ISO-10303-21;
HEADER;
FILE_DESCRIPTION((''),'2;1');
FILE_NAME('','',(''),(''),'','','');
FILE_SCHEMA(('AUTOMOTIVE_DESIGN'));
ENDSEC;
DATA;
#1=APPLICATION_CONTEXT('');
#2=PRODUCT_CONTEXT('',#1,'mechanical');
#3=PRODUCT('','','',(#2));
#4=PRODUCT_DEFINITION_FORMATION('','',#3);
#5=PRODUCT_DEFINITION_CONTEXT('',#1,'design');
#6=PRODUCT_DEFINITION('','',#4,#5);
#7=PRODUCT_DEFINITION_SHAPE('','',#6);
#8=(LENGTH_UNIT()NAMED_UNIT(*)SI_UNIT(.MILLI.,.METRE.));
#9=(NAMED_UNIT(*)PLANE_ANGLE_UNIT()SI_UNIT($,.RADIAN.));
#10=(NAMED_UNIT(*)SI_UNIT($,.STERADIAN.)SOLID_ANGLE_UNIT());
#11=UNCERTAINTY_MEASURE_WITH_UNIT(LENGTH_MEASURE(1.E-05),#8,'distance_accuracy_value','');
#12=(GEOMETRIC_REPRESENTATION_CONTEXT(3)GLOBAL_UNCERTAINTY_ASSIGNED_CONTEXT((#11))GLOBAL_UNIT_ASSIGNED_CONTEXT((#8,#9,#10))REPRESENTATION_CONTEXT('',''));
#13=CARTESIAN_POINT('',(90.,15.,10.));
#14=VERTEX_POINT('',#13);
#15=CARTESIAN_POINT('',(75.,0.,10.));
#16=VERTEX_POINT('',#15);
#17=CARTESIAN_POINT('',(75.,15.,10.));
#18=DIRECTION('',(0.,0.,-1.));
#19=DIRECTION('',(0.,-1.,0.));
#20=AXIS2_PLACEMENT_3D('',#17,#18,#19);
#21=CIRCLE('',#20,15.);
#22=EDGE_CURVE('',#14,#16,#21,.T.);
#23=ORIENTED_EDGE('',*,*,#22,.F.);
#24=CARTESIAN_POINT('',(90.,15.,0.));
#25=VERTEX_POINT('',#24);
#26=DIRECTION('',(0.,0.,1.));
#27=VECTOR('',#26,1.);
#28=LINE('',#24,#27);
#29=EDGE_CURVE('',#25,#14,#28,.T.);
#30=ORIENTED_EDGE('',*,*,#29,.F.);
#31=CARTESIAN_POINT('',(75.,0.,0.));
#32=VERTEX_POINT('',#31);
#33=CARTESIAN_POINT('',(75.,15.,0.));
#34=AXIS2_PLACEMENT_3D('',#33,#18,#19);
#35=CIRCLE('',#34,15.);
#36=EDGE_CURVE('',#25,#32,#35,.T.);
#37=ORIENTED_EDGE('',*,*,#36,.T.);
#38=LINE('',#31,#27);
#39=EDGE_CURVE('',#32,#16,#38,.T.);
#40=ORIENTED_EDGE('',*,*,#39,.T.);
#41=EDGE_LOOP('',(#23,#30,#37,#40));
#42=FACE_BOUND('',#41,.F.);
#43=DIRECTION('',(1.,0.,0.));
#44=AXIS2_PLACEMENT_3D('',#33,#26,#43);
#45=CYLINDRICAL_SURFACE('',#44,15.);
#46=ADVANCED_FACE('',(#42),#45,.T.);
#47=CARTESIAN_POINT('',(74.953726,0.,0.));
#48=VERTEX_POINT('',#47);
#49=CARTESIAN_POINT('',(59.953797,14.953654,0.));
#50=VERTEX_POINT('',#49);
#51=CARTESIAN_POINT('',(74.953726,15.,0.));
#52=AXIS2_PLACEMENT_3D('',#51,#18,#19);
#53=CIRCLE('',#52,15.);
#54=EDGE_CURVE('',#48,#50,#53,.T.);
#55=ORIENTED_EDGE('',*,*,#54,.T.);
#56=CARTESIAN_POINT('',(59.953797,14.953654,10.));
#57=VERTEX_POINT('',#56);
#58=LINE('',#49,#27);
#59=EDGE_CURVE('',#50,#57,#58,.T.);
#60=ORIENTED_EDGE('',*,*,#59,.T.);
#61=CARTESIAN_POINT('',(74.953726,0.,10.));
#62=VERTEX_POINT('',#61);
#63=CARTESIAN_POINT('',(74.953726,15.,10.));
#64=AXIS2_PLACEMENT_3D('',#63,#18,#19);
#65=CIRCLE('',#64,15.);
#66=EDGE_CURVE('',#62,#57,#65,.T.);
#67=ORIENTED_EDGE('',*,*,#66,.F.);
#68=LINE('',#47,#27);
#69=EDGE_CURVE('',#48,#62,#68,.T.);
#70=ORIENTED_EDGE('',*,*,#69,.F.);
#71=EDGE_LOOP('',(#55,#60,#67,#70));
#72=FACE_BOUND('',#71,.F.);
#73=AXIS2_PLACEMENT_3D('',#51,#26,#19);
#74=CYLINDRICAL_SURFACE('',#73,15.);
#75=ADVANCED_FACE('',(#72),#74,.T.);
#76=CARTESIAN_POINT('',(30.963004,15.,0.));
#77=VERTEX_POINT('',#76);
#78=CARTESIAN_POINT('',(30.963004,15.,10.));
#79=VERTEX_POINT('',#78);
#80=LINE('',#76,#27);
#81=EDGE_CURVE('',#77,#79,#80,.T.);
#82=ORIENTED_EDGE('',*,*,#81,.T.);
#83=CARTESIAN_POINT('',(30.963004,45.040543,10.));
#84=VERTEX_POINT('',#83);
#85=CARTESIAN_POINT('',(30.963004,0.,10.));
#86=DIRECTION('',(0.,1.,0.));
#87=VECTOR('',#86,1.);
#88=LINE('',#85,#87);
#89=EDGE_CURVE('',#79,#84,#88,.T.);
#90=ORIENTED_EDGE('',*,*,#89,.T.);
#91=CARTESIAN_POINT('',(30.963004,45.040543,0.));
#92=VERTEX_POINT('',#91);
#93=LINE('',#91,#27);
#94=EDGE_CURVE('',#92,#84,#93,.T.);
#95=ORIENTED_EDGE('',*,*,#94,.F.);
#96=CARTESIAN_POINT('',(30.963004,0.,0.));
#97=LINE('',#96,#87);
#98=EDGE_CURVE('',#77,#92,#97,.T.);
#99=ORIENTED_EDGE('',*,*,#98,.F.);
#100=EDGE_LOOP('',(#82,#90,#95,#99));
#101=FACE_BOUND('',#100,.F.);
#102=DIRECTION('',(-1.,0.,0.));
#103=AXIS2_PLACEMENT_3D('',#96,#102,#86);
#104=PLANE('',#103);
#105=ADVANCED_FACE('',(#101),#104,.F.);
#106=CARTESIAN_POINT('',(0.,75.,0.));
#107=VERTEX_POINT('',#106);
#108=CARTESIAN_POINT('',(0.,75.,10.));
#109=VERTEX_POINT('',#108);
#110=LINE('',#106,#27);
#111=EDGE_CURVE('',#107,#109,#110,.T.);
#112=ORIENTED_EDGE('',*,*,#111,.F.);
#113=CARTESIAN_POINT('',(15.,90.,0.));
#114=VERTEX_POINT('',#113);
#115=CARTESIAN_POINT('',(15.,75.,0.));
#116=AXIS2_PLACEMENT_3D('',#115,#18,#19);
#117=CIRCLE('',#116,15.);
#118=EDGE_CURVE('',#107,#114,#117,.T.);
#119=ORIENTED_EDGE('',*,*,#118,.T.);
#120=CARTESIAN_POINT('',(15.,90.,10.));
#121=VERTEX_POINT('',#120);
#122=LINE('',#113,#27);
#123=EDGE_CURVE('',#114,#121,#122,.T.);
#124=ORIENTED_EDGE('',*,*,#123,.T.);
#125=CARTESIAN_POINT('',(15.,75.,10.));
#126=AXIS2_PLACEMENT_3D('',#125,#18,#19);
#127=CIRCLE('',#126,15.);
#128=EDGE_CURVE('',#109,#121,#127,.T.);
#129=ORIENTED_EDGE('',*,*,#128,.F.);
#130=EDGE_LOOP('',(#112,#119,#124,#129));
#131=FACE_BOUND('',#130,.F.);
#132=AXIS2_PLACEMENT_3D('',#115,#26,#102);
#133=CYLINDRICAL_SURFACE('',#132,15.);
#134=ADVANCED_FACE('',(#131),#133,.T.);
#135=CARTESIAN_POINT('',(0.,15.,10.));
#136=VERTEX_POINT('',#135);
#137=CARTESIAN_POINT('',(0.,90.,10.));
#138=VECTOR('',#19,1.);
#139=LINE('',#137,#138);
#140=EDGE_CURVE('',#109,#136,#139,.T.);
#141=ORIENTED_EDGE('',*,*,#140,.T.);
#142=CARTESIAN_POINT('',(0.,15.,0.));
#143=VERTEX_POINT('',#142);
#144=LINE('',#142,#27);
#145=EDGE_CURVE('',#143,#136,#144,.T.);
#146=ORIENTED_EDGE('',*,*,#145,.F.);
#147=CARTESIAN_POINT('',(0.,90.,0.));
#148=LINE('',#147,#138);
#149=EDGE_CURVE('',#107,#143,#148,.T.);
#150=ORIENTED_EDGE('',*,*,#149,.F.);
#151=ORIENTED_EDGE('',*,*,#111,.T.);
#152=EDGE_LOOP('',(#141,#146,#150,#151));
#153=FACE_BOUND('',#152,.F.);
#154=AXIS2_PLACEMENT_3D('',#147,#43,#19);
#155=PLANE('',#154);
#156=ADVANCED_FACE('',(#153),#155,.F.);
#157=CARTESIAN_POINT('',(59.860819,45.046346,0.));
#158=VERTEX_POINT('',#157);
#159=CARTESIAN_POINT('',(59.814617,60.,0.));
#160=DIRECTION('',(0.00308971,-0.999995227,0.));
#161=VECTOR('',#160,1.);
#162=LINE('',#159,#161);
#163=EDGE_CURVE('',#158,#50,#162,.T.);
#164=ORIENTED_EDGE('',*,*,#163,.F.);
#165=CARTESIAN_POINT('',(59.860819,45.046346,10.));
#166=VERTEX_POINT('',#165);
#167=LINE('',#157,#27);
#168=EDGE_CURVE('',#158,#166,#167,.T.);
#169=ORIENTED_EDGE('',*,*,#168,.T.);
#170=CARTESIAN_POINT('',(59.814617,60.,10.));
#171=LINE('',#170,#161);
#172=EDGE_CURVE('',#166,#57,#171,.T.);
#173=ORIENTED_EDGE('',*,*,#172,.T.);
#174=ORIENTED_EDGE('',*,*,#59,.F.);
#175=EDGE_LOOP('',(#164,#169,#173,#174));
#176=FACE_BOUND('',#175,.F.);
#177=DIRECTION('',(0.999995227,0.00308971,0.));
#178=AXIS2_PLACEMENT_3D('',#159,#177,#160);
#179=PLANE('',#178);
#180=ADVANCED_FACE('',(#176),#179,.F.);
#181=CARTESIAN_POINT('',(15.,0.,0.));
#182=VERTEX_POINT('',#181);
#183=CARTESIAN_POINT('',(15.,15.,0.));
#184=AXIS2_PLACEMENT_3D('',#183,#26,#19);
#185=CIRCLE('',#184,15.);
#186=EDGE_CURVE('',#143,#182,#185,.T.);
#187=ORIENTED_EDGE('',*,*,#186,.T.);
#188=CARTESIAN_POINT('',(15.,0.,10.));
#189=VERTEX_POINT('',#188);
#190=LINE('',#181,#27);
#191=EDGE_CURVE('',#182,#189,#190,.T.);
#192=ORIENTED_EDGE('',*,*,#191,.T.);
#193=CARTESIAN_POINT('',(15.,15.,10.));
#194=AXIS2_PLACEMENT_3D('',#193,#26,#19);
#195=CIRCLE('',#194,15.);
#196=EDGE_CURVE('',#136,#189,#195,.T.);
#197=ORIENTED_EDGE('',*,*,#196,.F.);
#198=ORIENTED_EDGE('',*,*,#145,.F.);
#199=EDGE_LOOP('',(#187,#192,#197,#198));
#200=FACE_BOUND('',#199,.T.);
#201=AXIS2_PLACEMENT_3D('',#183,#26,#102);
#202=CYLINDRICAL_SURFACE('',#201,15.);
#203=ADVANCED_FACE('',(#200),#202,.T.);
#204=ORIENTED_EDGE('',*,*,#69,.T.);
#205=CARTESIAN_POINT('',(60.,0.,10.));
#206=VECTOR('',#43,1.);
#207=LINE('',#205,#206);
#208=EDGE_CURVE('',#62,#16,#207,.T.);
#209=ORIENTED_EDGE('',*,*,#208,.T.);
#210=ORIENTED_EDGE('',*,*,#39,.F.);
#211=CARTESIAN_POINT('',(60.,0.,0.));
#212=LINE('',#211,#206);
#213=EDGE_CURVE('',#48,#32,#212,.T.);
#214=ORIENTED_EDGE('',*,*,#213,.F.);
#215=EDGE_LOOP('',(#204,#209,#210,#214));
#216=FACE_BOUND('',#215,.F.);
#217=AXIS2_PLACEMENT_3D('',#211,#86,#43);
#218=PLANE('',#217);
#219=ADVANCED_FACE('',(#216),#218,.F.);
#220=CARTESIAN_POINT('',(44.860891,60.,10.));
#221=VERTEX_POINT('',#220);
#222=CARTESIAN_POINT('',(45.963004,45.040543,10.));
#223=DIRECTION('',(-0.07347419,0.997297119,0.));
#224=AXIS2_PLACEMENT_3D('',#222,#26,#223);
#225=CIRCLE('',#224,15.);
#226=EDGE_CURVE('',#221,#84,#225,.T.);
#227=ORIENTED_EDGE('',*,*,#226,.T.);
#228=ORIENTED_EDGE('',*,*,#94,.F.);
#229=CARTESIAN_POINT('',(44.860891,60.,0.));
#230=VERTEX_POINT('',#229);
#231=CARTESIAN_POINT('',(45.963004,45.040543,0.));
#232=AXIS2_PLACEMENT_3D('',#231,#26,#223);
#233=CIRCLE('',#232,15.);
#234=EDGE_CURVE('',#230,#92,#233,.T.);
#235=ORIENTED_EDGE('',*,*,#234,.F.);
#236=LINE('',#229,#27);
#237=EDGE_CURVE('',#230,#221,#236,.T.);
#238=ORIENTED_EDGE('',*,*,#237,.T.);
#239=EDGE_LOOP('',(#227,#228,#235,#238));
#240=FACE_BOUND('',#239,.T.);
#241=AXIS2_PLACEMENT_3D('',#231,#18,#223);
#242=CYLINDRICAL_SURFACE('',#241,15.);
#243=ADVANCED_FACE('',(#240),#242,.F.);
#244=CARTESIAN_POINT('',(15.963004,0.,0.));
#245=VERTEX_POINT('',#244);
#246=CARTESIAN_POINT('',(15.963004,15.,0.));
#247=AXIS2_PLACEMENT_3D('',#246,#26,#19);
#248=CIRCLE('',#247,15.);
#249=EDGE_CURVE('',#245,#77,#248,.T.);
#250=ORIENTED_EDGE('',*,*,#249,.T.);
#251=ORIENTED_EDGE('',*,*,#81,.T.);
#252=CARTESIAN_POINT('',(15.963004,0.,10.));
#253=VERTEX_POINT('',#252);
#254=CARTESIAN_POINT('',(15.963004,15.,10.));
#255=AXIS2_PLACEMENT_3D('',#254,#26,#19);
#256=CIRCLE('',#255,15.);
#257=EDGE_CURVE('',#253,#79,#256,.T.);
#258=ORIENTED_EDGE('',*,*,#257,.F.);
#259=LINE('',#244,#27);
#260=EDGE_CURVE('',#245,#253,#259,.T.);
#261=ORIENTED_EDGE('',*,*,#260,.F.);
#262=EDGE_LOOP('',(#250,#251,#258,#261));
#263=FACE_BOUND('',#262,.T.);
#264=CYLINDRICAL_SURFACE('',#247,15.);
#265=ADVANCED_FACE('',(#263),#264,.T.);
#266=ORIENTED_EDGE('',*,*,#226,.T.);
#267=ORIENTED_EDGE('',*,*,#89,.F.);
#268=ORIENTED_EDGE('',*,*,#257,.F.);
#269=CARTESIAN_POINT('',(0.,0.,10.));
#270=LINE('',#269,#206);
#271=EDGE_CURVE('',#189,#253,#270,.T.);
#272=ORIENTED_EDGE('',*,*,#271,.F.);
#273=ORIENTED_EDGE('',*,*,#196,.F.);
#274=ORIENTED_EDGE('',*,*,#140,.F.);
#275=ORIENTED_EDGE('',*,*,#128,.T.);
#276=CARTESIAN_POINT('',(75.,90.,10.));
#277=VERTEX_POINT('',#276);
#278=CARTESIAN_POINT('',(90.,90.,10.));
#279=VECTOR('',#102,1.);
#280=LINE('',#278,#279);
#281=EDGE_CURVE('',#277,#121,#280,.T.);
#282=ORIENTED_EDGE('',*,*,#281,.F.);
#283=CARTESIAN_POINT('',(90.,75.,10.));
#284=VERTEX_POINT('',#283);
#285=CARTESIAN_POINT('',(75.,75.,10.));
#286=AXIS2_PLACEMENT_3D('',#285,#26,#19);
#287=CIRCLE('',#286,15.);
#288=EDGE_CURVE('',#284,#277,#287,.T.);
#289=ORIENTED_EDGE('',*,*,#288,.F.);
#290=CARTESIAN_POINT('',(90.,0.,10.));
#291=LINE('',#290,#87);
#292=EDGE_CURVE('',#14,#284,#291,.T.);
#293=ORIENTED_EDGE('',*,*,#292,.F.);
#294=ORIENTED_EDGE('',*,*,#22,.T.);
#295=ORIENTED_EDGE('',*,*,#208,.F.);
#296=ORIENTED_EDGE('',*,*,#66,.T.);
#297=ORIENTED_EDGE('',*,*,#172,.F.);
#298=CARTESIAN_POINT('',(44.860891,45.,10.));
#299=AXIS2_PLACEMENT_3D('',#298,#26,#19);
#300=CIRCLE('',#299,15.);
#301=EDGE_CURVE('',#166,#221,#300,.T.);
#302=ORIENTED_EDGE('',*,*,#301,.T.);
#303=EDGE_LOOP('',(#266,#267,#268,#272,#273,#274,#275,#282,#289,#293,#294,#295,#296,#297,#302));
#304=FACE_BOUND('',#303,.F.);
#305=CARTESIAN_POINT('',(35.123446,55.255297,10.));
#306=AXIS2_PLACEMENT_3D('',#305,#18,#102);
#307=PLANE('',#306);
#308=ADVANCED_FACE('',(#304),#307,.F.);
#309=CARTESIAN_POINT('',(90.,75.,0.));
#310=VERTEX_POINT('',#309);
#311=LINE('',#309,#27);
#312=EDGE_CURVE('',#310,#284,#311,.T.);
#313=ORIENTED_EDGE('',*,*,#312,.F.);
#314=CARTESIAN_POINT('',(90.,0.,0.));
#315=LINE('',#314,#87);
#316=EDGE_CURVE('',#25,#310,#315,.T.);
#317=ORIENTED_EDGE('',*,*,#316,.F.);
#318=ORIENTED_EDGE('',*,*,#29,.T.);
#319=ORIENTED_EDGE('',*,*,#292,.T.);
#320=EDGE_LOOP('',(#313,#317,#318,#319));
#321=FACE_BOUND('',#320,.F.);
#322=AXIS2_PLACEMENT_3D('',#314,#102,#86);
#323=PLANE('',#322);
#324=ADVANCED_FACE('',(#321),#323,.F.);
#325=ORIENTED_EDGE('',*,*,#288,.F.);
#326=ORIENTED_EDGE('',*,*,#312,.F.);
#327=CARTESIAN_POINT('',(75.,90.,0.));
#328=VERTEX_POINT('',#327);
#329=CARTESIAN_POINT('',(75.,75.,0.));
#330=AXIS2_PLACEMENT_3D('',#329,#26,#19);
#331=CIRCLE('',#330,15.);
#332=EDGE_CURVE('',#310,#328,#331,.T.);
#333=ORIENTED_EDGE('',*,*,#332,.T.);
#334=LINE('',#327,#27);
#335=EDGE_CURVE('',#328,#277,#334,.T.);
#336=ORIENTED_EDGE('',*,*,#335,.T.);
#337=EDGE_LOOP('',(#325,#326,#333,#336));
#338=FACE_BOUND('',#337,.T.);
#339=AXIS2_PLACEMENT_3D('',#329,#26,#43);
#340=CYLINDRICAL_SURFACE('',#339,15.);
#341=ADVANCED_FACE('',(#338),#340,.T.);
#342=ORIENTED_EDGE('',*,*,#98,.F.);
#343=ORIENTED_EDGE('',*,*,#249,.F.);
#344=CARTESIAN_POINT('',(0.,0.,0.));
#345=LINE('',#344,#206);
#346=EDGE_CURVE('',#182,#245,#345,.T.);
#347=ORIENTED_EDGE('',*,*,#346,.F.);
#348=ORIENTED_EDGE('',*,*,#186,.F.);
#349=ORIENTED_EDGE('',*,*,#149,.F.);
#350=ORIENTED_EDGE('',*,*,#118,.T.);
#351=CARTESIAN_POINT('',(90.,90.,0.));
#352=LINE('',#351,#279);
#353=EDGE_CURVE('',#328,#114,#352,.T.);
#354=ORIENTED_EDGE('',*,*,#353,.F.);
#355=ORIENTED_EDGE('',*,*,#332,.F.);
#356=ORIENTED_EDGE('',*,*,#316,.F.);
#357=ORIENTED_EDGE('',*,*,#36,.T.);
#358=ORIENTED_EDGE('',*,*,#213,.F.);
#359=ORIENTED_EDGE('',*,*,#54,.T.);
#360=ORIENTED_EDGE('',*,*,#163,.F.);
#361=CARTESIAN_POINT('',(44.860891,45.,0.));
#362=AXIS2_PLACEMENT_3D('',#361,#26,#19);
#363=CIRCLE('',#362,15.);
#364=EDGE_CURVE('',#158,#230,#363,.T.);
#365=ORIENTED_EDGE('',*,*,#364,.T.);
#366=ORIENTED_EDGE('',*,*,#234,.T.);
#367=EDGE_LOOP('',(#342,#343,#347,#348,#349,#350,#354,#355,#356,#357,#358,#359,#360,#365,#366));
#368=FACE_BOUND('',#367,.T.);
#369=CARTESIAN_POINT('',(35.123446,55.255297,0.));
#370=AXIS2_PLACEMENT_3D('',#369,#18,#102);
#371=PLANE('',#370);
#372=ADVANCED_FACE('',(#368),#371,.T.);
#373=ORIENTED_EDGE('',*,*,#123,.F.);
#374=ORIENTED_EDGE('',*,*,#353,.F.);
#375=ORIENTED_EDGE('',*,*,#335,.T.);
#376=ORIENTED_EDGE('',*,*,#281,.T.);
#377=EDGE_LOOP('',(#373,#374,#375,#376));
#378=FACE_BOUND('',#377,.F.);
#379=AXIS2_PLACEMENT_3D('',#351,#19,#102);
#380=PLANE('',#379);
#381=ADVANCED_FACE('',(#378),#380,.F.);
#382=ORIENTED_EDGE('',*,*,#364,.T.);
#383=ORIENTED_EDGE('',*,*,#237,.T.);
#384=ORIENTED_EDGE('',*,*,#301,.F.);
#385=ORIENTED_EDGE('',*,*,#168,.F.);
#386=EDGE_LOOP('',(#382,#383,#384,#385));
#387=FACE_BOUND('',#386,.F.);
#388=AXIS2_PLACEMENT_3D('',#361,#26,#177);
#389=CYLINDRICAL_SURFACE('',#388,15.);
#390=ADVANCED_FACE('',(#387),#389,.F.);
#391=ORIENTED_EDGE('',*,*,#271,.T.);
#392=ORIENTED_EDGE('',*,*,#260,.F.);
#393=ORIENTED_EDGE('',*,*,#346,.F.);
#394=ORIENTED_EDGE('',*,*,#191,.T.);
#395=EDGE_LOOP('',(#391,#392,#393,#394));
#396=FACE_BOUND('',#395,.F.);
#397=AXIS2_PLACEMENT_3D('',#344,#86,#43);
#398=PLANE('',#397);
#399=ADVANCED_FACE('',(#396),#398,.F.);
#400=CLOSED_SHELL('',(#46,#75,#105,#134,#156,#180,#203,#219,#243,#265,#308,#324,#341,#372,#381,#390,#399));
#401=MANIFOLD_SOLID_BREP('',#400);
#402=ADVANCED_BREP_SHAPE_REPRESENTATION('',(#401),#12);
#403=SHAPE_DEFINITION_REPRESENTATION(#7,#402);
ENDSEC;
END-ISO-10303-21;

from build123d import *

# Parameters (mm, degrees)
F1_DEPTH    = 10
F2_R        = 15
F3_R        = 15
F4_R        = 15
F5_R        = 15
F6_T1_DEPTH = 10


# Not quite as in the source:
# - a fillet or chamfer that OpenCascade refuses, or shapes differently, is made with other operations: its cross-section is extruded or revolved along the edge and cut away or added


with BuildPart() as f1:
    # F0 (on Top) → F1 (new body)
    with BuildSketch(Plane.XY):
        Polygon((0, 90), (0, 0), (30.9630036354, 0), (30.9630036354, 60), (59.8146165162, 60), (60, 0), (90, 0), (90, 90), align=None)
    extrude(amount=F1_DEPTH)

    # F2
    f2_edges = [f1.edges().sort_by_distance(p)[0] for p in [
        (0, 90, 5),
        (90, 90, 5),
    ]]
    fillet(f2_edges, radius=F2_R)

    # F3
    f3_edges = [f1.edges().sort_by_distance(p)[0] for p in [
        (0, 0, 5),
        (30.963004, 0, 5),
    ]]
    fillet(f3_edges, radius=F3_R)

    # F4
    f4_edges = [f1.edges().sort_by_distance(p)[0] for p in [
        (60, 0, 5),
        (90, 0, 5),
    ]]
    fillet(f4_edges, radius=F4_R)

    # F5
    f5_edges = [f1.edges().sort_by_distance(p)[0] for p in [
        (59.814617, 60, 5),
    ]]
    fillet(f5_edges, radius=F5_R)

    # F6: fillet of radius 15 on 1 edges, made by hand

    # F6_s2 → F6_t1 (join)
    with BuildSketch(Plane.XY):
        with BuildLine():
            ThreePointArc((44.8608907894, 60), (34.9736521375, 55.2500561159), (30.9630036354, 45.0405432159))
            Line((30.9630036354, 45.0405432159), (30.9630036354, 60))
            Line((30.9630036354, 60), (44.8608907894, 60))
        make_face()
    extrude(amount=F6_T1_DEPTH)


solid = f1.part
